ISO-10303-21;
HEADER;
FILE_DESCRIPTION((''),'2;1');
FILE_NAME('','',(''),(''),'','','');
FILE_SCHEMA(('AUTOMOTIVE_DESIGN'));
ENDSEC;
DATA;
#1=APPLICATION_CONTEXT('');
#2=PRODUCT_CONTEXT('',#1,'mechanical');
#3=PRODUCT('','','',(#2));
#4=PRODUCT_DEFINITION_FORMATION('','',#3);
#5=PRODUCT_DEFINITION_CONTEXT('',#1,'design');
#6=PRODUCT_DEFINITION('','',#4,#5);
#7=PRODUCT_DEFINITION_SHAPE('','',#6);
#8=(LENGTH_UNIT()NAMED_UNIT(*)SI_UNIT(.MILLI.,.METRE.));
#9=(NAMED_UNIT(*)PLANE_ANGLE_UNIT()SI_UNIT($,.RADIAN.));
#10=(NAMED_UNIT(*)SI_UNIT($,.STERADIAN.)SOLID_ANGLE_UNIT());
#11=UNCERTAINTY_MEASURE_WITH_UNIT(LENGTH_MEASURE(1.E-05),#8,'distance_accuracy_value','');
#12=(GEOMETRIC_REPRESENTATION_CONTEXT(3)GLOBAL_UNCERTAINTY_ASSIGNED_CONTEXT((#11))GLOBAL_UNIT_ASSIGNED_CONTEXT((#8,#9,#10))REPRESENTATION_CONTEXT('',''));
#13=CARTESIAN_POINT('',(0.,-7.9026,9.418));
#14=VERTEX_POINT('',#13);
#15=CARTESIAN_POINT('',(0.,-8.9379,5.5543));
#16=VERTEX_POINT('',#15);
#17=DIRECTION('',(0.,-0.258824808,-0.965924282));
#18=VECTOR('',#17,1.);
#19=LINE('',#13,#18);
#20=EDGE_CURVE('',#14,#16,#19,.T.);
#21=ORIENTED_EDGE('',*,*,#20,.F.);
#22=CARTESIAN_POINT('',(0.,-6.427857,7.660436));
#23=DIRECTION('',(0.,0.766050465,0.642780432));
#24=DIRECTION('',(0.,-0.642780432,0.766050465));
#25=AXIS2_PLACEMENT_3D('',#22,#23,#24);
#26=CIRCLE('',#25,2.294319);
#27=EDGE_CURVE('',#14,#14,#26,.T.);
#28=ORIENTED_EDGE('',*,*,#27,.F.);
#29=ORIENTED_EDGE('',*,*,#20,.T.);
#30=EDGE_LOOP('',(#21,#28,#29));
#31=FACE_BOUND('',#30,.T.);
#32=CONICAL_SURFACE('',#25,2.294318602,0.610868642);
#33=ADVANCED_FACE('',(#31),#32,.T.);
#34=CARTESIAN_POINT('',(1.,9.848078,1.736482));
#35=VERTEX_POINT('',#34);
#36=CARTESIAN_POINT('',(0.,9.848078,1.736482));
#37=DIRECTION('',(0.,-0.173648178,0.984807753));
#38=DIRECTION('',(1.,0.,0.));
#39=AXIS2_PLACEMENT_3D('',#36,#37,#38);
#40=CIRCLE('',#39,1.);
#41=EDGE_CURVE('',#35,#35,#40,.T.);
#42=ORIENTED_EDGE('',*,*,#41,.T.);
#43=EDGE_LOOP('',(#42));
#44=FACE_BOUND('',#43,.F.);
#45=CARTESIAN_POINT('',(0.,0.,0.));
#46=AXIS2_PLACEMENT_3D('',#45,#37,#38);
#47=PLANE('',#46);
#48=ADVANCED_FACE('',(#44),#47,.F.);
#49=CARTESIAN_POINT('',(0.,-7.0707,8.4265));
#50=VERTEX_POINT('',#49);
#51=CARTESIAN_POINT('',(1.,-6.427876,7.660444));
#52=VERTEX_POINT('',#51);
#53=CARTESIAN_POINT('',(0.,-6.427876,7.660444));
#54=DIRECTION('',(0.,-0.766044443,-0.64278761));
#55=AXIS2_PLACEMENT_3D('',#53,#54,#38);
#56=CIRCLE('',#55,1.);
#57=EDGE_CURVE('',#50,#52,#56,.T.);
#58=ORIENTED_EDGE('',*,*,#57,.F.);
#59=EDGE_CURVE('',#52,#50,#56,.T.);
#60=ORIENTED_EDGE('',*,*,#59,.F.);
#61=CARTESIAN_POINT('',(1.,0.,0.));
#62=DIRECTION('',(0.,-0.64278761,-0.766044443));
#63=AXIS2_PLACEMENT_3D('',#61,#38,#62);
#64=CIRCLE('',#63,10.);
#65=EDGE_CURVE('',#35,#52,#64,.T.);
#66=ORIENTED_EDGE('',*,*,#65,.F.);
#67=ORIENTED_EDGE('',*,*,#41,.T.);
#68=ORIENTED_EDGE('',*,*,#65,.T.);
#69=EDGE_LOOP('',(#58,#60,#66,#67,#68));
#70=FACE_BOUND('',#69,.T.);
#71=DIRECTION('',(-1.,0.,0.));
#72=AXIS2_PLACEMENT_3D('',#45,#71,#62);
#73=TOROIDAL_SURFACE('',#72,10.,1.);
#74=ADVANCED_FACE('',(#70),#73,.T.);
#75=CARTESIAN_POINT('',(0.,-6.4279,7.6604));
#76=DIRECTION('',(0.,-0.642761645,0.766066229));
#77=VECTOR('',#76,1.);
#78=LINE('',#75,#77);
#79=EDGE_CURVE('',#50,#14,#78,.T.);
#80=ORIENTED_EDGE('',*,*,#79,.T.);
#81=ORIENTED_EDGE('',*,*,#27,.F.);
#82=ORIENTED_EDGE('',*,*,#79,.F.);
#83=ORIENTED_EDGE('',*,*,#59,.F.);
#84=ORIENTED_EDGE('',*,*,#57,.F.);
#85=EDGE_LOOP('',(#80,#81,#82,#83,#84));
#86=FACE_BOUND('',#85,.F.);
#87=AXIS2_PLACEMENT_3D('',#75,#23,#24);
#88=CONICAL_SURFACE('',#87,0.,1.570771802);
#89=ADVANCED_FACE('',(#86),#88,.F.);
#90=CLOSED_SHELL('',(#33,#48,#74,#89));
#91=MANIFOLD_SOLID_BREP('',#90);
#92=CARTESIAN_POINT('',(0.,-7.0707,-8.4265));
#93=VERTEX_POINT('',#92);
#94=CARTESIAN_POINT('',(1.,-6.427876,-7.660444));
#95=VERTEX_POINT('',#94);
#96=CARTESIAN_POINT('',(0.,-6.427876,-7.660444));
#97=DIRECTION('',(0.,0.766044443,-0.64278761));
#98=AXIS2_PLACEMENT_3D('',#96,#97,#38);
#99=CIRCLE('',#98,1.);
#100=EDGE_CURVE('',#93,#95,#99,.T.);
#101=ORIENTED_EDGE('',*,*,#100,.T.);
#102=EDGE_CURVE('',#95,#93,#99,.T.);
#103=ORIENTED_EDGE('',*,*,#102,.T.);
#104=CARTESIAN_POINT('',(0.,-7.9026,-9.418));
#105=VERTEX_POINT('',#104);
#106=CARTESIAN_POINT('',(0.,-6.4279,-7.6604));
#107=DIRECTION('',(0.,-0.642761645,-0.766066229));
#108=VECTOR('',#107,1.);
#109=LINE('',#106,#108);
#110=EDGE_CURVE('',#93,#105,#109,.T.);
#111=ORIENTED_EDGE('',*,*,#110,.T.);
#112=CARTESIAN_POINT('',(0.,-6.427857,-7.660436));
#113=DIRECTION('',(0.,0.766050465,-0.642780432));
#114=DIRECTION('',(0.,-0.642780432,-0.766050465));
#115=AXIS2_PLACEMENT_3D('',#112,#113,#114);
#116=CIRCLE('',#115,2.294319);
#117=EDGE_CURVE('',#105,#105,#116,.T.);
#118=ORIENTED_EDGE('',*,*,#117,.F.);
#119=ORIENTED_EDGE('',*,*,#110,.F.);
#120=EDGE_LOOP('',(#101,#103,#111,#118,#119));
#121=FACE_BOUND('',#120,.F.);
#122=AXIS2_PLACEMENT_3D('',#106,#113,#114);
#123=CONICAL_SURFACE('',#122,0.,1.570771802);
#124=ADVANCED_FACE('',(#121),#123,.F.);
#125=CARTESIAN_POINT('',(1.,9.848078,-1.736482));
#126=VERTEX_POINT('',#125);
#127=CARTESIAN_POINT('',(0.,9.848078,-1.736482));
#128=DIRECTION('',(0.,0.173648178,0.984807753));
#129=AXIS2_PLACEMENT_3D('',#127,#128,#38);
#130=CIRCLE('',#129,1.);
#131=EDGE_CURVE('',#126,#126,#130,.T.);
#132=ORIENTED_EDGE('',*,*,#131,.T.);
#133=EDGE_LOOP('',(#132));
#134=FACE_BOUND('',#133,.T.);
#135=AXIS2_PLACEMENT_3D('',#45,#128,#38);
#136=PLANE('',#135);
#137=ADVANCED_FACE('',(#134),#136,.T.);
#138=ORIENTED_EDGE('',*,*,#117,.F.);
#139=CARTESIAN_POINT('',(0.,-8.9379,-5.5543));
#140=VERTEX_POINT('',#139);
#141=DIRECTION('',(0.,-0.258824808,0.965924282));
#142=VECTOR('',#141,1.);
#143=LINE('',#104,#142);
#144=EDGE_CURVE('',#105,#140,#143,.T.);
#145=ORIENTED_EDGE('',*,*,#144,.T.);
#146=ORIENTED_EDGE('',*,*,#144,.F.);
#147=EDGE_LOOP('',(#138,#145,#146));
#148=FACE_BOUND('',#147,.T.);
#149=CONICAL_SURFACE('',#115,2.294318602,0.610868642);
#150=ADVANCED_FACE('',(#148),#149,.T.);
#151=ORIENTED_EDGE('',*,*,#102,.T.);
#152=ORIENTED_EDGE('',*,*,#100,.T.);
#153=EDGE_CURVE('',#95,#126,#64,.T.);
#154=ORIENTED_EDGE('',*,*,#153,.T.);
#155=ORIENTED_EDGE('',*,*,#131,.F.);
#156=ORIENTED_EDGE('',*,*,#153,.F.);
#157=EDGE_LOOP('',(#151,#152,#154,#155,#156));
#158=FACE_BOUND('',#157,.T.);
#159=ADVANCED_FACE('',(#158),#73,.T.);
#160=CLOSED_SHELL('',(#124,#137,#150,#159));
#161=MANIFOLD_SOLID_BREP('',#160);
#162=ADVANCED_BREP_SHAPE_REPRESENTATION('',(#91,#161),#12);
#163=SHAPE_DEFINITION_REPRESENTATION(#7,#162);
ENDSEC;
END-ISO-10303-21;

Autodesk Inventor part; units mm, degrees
ref_plane "YZ Plane" through (0, 0, 0) normal (1, 0, 0) x (0, 1, 0)
ref_plane "XZ Plane" through (0, 0, 0) normal (0, 1, 0) x (-1, 0, 0)
ref_plane "XY Plane" through (0, 0, 0) normal (0, 0, 1) x (1, 0, 0)
sketch "Sketch1" plane through (0, 0, 0) normal (0, 0, 1) x (1, 0, 0)
  line L0 (0, 0) -> (7, 0)
  circle A0 centre (0, 10) radius 1
  dimension "d0" = 7
  dimension "d2" = 2
  dimension "d3" = 10
revolve "Revolution1" add sketch "Sketch1" angle 260 mid plane about axis through (0, 0, 0) along (1, 0, 0)
revolve "Revolution2" cut sketch "Sketch1" angle 20 mid plane about axis through (0, 0, 0) along (1, 0, 0)
sketch "Sketch2" plane through (0, 0, 0) normal (1, 0, 0) x (0, 1, 0)
  line L0 (-7.0707, 8.4265) -> (-5.7851, 6.8944) projected
  line L1 (-6.4279, 7.6604) -> (-11.6539, 3.2753)
  line L2 (-6.4279, 7.6604) -> (-7.9026, 9.418)
  line L3 (-7.9026, 9.418) -> (-8.9379, 5.5543)
  point P0 (0, 0)
  dimension "d6" = 35
  dimension "d8" = 4
revolve "Revolution3" add sketch "Sketch2" angle 360 about axis through (0, -6.4279, 7.6604) along (0, 0.7660444, 0.6427876)
sketch "Sketch3" plane through (0, 0, 0) normal (1, 0, 0) x (0, 1, 0)
  line L0 (-7.0707, -8.4265) -> (-5.7851, -6.8944) projected
  line L1 (-6.4279, -7.6604) -> (-9.9209, -4.7295)
  line L2 (-6.4279, -7.6604) -> (-7.9026, -9.418)
  line L3 (-7.9026, -9.418) -> (-8.9379, -5.5543)
  point P0 (0, 0)
  dimension "d10" = 35
  dimension "d11" = 0
  dimension "d12" = 4
revolve "Revolution4" add sketch "Sketch3" angle 360 about axis through (0, -6.4279, -7.6604) along (0, 0.7660444, -0.6427876)
properties part number "Turns"
